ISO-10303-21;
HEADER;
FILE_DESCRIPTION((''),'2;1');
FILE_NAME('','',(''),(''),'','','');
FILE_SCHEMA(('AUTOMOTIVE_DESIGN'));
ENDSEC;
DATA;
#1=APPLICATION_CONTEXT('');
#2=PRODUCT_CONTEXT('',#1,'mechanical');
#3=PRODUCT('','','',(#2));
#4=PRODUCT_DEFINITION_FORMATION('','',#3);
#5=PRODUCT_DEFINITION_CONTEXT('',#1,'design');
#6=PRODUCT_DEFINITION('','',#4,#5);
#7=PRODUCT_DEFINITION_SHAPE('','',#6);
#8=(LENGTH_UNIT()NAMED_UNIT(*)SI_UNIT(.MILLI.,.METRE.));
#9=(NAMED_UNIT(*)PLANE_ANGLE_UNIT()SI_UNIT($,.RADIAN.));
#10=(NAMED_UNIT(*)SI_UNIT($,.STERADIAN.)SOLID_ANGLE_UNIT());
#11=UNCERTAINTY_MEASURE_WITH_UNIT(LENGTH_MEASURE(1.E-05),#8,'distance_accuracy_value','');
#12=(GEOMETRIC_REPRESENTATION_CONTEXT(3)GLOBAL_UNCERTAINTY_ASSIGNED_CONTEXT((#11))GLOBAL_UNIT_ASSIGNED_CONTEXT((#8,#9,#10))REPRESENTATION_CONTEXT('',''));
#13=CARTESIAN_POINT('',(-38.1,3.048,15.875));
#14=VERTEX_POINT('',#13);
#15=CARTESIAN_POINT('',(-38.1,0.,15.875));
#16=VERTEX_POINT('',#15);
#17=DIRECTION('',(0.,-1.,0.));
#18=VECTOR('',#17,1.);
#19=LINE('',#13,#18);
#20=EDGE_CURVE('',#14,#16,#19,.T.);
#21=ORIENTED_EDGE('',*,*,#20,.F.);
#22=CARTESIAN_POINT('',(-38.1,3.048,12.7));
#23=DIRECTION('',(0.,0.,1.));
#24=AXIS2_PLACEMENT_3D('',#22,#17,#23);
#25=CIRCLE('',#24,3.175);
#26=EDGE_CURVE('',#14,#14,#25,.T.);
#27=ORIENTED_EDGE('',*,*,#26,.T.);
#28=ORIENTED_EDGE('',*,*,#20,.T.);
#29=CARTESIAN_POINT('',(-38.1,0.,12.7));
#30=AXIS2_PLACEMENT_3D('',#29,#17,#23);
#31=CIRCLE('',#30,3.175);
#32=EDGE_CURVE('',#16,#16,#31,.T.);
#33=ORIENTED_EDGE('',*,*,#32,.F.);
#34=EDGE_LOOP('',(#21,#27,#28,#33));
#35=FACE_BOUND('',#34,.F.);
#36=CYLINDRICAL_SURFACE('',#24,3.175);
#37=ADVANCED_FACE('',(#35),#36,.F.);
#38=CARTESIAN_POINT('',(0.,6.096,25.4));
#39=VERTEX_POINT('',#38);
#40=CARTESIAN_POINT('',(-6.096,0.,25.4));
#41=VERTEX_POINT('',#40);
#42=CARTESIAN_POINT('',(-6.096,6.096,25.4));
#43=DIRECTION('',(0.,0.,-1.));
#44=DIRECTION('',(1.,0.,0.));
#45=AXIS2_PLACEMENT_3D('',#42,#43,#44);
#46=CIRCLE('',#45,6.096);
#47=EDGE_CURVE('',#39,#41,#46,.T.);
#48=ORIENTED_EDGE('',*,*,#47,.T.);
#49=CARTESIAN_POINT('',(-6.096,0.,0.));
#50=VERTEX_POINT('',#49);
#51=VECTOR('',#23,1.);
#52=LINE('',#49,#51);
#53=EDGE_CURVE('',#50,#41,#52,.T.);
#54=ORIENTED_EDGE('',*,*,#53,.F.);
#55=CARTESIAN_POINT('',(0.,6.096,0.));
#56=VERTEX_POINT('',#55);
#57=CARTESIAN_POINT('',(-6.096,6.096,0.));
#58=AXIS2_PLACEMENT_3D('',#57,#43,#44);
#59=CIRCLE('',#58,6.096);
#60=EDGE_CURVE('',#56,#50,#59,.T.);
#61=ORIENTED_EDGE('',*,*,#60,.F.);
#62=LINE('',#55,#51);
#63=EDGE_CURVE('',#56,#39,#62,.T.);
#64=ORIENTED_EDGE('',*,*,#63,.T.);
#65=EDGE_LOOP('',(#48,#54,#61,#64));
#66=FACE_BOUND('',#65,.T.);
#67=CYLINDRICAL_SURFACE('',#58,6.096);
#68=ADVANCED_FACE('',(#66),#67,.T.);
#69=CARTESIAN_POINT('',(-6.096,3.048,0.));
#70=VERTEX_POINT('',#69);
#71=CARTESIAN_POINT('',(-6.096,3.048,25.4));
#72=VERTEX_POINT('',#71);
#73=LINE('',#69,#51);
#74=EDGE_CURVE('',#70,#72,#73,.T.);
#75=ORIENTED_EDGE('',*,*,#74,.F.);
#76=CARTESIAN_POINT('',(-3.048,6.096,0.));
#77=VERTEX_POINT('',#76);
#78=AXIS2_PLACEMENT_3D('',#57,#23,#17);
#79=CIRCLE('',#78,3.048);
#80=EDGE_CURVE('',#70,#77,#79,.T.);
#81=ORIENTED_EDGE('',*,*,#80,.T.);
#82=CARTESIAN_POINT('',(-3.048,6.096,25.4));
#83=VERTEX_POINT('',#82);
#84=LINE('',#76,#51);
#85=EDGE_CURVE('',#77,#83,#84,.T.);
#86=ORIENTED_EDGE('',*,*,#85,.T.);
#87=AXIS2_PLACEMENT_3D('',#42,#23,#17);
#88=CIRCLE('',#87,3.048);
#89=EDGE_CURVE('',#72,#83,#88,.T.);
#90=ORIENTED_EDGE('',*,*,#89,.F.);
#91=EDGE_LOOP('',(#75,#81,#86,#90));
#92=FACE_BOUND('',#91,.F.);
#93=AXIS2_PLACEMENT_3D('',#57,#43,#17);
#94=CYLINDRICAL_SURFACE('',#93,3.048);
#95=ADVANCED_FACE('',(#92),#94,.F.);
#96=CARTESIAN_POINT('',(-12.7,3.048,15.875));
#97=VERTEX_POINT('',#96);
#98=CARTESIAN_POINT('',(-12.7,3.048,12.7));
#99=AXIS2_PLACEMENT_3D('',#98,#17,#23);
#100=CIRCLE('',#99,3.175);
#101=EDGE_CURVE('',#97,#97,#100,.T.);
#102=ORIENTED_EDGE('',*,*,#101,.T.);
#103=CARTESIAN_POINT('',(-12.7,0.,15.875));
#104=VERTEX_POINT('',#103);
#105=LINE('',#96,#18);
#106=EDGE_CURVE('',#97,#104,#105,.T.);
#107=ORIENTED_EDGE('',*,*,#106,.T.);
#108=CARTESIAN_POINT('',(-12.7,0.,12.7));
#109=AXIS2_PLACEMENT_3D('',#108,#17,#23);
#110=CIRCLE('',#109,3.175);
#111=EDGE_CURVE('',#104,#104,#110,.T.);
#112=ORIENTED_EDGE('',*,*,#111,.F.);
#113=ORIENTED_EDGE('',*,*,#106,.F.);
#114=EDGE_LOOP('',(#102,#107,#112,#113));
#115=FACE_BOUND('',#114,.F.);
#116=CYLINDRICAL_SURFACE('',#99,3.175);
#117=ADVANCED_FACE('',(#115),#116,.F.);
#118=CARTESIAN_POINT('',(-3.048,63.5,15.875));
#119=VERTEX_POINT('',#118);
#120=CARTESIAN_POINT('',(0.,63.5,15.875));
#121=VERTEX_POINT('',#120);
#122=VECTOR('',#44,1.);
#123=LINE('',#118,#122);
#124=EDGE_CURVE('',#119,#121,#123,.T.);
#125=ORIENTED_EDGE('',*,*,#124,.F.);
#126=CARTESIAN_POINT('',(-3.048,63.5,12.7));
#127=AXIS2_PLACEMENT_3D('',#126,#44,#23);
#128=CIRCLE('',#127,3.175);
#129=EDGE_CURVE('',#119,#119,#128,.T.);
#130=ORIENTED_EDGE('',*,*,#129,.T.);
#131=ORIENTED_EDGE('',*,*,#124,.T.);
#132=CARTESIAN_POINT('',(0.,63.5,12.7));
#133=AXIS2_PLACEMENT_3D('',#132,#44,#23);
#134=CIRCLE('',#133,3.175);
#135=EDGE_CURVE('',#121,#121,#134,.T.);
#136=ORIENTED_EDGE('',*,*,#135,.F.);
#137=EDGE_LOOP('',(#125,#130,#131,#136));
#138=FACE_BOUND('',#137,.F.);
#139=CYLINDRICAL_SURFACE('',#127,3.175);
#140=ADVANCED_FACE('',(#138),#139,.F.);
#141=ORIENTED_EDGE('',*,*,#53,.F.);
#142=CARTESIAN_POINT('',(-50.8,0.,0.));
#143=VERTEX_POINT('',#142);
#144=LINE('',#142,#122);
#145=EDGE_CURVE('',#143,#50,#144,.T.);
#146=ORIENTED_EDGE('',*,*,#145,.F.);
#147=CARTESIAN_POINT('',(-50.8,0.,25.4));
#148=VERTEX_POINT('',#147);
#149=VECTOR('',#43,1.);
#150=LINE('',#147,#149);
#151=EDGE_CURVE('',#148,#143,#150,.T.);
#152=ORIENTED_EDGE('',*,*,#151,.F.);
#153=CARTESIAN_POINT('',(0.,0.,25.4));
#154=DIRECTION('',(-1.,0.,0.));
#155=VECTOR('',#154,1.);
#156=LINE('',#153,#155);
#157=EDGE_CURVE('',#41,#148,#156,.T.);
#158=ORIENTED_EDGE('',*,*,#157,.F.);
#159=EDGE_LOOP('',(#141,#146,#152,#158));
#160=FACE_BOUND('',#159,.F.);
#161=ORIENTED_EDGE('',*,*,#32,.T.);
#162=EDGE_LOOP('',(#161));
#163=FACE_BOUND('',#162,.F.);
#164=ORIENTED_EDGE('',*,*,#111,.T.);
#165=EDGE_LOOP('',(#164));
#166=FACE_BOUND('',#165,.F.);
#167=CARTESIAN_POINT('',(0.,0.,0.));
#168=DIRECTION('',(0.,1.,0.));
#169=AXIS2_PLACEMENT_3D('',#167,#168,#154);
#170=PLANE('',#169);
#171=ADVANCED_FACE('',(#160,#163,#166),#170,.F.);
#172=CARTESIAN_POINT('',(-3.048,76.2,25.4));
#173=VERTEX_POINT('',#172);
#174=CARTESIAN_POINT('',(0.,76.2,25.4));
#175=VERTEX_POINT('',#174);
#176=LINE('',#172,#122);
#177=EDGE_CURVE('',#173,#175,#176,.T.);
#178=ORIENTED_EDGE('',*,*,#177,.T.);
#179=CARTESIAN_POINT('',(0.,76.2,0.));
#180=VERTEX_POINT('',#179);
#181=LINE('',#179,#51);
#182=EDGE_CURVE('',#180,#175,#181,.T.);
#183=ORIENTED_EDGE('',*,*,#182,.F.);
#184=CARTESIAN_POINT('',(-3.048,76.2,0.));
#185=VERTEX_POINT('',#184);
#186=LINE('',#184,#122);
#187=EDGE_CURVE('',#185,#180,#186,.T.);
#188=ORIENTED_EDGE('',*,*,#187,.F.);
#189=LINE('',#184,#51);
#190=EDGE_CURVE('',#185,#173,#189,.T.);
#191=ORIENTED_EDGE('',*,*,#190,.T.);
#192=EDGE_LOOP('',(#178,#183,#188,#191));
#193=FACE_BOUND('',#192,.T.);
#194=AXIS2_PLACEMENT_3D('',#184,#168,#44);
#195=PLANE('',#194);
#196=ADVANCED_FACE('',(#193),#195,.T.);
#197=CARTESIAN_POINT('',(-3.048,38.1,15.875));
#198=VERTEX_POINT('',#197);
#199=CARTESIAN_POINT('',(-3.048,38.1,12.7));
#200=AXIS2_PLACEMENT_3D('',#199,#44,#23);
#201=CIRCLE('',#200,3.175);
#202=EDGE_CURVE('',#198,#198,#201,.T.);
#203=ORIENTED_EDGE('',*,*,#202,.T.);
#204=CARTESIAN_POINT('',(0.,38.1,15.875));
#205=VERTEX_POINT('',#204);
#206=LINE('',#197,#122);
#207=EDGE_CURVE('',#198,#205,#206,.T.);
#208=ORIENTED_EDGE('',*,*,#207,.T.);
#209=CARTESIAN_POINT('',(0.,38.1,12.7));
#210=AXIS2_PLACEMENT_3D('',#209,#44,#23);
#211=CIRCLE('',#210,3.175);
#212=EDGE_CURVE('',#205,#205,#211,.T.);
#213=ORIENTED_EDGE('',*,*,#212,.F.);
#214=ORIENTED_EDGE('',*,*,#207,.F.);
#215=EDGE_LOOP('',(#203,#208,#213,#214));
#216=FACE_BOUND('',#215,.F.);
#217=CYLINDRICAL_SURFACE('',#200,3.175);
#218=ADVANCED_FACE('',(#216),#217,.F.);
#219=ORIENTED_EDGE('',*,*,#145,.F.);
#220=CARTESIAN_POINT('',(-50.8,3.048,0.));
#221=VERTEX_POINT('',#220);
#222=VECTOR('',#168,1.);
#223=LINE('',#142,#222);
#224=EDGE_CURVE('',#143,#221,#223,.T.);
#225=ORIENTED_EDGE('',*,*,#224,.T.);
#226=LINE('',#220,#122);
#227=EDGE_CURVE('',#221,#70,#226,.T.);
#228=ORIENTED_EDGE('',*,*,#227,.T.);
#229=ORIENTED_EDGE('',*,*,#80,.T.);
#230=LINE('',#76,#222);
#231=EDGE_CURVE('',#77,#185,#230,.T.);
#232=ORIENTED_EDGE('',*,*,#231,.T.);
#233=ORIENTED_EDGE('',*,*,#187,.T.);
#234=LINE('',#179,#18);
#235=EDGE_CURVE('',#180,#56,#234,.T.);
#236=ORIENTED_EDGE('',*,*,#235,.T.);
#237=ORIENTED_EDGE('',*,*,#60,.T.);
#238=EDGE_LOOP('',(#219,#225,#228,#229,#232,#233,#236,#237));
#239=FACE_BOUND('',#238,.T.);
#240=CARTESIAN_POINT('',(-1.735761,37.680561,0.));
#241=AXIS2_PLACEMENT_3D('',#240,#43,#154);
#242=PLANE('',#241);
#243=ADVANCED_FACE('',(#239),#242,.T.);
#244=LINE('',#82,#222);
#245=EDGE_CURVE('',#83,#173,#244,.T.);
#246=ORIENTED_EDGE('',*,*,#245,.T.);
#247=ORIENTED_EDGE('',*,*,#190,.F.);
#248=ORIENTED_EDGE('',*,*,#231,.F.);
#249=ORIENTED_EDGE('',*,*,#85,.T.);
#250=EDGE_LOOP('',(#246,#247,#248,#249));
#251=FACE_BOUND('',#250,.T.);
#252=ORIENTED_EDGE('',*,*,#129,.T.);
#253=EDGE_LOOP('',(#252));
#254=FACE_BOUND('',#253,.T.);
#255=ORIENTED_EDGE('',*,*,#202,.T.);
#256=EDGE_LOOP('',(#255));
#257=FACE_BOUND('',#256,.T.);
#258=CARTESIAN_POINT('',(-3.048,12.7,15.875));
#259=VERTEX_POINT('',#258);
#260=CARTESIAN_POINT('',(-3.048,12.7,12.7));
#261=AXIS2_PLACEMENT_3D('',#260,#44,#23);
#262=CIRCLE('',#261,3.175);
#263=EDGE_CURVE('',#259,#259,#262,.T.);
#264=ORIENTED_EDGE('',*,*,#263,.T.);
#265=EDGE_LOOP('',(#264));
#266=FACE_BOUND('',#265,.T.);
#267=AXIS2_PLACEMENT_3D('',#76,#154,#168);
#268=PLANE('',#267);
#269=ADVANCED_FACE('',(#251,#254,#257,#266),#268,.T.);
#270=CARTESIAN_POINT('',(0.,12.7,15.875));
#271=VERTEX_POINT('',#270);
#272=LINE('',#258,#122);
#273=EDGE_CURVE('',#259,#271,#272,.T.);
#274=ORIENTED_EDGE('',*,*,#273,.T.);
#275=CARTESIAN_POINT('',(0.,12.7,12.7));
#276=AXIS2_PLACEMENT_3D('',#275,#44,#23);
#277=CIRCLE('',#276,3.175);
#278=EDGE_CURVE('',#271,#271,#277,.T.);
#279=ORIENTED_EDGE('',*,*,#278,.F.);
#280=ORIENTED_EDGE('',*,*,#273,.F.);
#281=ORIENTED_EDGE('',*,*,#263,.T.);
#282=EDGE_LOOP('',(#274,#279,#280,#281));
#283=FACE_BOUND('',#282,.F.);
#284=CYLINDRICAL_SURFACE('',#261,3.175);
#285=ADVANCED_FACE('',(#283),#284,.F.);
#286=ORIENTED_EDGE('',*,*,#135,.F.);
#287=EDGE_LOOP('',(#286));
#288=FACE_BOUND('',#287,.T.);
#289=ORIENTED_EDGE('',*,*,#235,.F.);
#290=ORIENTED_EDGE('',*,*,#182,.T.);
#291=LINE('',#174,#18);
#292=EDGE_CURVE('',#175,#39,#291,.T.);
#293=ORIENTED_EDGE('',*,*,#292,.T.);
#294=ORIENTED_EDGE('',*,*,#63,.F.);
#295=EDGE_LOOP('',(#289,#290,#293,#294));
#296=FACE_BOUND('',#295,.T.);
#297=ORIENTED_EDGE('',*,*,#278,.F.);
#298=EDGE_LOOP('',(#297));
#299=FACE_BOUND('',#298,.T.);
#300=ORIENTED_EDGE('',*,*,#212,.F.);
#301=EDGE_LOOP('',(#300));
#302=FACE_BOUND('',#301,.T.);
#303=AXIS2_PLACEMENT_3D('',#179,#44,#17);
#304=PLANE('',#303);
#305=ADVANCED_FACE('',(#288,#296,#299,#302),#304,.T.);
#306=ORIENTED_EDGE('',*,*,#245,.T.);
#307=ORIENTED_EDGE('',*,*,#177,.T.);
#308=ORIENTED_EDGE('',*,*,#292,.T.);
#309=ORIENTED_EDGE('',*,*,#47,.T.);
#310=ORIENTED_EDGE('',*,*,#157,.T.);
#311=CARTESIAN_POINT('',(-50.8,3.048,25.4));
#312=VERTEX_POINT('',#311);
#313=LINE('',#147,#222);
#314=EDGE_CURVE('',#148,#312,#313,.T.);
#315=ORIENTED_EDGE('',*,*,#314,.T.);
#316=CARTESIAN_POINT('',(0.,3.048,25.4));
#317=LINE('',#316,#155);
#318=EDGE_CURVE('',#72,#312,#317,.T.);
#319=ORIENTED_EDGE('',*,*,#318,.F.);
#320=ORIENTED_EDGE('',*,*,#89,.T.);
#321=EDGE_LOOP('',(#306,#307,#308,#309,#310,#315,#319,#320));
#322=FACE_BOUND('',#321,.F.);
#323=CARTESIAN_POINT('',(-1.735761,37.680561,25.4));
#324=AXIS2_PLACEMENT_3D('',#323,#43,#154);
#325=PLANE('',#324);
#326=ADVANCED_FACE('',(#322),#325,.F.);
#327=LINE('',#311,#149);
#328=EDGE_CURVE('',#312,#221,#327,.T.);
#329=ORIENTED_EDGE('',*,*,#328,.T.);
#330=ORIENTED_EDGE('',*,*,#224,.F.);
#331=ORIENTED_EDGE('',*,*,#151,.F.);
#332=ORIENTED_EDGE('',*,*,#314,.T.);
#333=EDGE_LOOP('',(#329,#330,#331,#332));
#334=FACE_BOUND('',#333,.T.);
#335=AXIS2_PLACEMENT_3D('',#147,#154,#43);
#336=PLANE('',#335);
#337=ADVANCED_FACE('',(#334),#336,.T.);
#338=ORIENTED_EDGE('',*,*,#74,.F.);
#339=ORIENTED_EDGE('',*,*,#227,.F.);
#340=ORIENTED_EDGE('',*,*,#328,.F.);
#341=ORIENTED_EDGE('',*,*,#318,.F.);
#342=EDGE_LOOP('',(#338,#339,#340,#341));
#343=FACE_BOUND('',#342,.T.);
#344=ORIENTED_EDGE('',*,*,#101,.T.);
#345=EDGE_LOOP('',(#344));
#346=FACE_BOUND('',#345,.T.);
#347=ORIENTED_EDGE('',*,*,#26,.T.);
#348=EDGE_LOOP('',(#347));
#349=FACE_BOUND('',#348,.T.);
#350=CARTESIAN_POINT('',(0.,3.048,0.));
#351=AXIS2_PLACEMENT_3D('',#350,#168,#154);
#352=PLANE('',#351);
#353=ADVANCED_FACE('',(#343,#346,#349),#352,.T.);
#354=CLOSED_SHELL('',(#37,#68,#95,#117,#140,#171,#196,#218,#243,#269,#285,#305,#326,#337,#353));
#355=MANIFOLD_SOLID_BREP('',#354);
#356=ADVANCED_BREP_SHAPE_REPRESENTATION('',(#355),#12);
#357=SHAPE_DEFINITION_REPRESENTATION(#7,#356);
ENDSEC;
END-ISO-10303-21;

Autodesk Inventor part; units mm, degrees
ref_plane "YZ Plane" through (0, 0, 0) normal (1, 0, 0) x (0, 1, 0)
ref_plane "XZ Plane" through (0, 0, 0) normal (0, 1, 0) x (-1, 0, 0)
ref_plane "XY Plane" through (0, 0, 0) normal (0, 0, 1) x (1, 0, 0)
sketch "Sketch1" plane through (0, 0, 0) normal (0, 1, 0) x (-1, 0, 0)
  line L0 (0, 0) -> (0, 25.4)
  line L1 (0, 25.4) -> (50.8, 25.4)
  line L2 (50.8, 25.4) -> (50.8, 0)
  line L3 (50.8, 0) -> (0, 0)
  dimension "d0" = 25.4
  dimension "d1" = 50.8
extrude "Plate1" add sketch "Sketch1" along normal blind 3.048
sketch "Sketch2" plane through (-3.048, 0, 0) normal (1, 0, 0) x (0, 1, 0)
  line L0 (0, 25.4) -> (0, 0)
  line L1 (0, 0) -> (76.2, 0)
  line L2 (76.2, 0) -> (76.2, 25.4)
  line L3 (76.2, 25.4) -> (0, 25.4)
edge flange "Flange1" height 76.2 angle 90 thickness 3.048 bend radius 3.048 thickness toward (1, 0, 0) relief tear relief width 3.048 relief depth 1.524 edges at (0, 3.048, 12.7) wall of the first edge with corners at (-3.048, 0, 25.4) (-3.048, 0, 0) (-3.048, 76.2, 0) (-3.048, 76.2, 25.4)
bend "Bend1"
corner "Corner1"
hole "Hole1" at (-3.048, 12.7, 12.7) direction (1, 0, 0) diameter 6.35 end through all
pattern_linear "Rectangular Pattern1" count 3 spacing 25.4 along (0, 1, 0) of "Hole1"
hole "Hole2" at (-12.7, 3.048, 12.7) direction (0, -1, 0) diameter 6.35 end through all
pattern_linear "Rectangular Pattern2" count 2 spacing 25.4 along (-1, 0, 0) of "Hole2"
equation "\"d20\" = Thickness"
equation "\"d32\" = Thickness"
equation "\"d3\" = BendReliefWidth"
equation "\"d4\" = BendReliefDepth"
equation "\"d5\" = MinimumRemnant"
equation "\"d6\" = BendRadius"
equation "\"d9\" = BendRadius"
equation "\"d10\" = CornerReliefSize"
equation "\"d11\" = GapSize"
equation "\"d12\" = JacobiRadiusSize"
equation "\"BendRadius\" = Thickness"
equation "\"BendReliefWidth\" = Thickness"
equation "\"BendReliefDepth\" = 0.5 * Thickness"
equation "\"CornerReliefSize\" = 4 * Thickness"
equation "\"MinimumRemnant\" = 2 * Thickness"
equation "\"TransitionRadius\" = BendRadius"
equation "\"JacobiRadiusSize\" = BendRadius"
equation "\"GapSize\" = Thickness"
equation "\"d2\" = BendRadius"
equation "\"Thickness\" = 3.048"
properties part number "L-Gusset Steel Plate"
